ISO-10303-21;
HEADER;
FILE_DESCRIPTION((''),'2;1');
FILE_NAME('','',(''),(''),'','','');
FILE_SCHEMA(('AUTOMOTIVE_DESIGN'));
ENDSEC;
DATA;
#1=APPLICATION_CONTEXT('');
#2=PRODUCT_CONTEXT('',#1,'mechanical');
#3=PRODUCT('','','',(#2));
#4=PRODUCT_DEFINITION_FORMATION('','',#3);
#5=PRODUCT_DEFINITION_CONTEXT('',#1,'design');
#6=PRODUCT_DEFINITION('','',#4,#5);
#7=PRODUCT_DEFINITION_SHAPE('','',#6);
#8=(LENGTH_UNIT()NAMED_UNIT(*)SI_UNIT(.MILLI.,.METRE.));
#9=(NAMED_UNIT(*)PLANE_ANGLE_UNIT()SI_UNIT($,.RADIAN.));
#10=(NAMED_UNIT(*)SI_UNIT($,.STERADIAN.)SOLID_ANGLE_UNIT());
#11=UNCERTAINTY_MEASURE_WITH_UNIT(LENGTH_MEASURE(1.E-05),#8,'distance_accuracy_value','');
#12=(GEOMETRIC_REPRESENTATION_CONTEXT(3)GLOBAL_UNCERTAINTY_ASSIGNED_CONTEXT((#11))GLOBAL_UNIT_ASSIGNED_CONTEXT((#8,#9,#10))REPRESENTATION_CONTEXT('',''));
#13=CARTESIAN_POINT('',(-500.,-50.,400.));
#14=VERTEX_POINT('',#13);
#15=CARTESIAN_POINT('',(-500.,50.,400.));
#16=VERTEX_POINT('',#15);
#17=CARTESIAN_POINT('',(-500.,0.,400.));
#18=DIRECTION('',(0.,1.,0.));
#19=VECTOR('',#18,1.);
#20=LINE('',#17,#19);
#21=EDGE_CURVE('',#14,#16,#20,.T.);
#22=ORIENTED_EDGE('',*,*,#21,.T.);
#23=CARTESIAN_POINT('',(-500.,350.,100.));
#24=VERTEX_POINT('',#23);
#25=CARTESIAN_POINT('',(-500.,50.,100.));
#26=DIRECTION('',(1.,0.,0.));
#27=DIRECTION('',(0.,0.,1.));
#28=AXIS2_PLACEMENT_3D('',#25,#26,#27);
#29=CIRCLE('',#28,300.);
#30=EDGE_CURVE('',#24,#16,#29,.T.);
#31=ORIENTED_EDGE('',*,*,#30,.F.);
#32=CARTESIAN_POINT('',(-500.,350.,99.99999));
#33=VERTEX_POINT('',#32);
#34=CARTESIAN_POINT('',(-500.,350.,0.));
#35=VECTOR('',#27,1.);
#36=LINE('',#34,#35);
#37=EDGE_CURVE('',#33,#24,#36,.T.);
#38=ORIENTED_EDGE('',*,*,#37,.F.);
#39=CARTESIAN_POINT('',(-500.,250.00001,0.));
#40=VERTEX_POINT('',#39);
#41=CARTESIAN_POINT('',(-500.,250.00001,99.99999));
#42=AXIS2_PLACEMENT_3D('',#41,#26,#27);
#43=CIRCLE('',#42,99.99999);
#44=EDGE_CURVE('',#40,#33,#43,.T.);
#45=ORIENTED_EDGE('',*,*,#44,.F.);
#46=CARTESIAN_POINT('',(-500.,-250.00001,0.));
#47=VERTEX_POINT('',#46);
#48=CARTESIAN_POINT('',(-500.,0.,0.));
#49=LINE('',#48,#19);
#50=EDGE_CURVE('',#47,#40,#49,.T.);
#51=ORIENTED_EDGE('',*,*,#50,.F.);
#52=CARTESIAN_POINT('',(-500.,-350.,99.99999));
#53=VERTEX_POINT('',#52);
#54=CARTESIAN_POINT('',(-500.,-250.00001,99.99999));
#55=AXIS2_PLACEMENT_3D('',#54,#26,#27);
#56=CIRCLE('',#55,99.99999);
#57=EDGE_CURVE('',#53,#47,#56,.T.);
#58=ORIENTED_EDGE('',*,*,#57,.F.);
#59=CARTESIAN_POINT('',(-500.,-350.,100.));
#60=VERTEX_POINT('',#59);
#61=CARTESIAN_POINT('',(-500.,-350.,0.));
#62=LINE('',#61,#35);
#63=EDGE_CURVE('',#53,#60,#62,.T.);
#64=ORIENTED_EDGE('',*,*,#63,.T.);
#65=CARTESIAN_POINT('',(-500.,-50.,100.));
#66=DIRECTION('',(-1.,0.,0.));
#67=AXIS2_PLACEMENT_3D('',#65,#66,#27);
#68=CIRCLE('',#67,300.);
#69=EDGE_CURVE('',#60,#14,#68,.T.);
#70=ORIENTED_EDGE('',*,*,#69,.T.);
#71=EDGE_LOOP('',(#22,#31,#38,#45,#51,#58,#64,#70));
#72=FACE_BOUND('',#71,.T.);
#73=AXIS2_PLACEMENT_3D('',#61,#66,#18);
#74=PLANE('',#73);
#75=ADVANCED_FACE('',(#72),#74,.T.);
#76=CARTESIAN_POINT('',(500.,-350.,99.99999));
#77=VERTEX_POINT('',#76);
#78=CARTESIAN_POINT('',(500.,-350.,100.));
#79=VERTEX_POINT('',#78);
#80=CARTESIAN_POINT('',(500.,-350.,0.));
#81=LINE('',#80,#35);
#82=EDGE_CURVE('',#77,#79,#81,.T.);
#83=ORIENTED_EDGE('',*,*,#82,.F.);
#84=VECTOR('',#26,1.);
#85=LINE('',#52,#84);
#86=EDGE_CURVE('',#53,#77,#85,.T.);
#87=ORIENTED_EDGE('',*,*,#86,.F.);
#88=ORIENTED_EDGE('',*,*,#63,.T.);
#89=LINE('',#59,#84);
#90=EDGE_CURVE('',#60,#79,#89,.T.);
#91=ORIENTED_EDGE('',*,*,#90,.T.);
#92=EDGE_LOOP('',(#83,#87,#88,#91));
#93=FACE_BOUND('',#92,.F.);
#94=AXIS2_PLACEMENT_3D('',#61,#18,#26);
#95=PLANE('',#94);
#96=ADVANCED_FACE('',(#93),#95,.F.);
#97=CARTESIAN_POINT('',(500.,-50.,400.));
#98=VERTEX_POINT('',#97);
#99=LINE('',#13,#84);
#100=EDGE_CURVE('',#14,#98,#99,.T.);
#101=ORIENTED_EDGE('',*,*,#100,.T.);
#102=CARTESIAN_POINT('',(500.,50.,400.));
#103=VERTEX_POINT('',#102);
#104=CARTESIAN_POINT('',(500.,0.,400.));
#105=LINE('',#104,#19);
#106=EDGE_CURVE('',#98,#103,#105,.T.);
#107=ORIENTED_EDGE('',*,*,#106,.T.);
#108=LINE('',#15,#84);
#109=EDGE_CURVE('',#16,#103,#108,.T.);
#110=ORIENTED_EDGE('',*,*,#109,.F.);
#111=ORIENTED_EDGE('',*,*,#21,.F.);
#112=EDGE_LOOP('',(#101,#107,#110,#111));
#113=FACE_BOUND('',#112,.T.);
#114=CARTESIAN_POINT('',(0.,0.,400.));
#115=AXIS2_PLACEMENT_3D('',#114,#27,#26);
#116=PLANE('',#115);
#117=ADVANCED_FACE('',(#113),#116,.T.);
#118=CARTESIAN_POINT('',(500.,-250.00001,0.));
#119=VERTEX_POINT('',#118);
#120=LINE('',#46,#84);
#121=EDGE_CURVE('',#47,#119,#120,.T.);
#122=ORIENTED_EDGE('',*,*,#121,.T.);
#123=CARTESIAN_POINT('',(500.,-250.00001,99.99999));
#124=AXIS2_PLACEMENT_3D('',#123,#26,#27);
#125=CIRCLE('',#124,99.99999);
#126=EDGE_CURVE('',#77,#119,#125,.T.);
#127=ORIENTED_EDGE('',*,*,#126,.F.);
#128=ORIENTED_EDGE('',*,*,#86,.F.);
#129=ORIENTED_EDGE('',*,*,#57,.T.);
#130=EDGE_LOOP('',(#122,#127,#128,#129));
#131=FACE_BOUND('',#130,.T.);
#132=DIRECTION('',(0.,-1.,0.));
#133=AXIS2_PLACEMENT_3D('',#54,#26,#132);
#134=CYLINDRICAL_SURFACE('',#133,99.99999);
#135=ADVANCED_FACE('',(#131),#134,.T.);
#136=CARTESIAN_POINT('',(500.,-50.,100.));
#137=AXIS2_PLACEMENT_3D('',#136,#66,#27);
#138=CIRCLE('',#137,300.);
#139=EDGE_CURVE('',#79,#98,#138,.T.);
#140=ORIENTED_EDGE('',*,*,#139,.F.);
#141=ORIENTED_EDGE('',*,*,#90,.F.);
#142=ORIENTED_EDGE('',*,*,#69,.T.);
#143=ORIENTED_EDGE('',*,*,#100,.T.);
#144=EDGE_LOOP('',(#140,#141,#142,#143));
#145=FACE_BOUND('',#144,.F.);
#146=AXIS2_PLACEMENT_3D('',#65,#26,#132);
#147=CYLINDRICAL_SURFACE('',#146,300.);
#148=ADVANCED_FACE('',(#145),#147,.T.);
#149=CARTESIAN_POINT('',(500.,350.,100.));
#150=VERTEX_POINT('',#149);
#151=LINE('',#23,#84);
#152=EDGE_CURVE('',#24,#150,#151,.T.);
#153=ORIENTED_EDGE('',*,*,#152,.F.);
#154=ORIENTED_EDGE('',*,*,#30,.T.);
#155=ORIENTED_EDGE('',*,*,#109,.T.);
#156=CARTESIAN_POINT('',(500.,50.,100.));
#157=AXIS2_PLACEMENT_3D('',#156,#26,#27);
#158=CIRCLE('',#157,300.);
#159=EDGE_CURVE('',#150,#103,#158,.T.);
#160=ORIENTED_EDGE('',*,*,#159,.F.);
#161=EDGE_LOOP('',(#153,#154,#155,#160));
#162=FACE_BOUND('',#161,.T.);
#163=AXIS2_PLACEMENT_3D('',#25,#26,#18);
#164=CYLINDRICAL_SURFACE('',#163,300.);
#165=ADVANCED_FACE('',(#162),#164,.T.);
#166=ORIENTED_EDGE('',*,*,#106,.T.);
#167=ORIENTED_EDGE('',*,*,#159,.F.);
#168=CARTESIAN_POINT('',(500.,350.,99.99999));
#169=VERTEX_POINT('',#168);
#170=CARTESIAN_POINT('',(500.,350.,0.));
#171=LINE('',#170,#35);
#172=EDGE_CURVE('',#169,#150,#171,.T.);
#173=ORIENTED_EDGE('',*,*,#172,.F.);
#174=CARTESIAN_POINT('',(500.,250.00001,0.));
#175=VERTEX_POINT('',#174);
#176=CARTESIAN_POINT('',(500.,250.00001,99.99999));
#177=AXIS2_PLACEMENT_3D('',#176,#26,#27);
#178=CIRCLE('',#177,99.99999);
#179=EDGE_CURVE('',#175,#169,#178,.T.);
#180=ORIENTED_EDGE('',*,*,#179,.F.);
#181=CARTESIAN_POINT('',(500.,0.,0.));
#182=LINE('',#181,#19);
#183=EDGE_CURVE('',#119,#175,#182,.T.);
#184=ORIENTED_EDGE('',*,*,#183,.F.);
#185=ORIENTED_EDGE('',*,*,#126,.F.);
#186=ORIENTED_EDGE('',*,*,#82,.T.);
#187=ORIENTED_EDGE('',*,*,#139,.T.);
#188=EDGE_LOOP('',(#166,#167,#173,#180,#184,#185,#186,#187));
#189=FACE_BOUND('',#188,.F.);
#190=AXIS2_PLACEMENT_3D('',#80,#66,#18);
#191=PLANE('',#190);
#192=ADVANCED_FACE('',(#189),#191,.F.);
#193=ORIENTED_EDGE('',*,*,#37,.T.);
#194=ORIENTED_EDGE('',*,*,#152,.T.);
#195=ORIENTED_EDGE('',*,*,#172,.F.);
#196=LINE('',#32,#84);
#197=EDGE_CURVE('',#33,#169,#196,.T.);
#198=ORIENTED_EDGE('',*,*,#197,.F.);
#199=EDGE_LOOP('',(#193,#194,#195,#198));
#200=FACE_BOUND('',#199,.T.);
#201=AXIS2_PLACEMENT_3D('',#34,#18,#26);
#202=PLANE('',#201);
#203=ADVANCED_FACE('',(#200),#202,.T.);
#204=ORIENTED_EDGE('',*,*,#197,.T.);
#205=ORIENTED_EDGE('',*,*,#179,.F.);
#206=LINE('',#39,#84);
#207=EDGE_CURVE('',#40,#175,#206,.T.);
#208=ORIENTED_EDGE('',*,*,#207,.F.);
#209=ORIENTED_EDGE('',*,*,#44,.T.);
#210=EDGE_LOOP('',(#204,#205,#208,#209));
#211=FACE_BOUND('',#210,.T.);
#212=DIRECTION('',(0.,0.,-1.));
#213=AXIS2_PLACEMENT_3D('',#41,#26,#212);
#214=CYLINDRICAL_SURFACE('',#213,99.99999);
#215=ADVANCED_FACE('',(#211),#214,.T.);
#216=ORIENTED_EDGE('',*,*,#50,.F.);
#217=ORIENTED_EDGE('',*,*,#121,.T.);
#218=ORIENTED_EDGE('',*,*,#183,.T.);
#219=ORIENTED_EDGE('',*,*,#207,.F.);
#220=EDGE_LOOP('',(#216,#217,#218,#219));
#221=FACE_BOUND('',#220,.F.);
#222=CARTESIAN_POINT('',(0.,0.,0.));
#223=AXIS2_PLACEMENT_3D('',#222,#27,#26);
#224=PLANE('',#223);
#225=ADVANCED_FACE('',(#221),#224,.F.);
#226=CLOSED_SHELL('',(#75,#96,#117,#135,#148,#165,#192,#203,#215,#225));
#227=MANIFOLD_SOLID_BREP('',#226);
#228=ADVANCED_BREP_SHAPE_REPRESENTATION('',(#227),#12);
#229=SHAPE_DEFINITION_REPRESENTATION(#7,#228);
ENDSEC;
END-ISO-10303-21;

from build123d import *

# Parameters (mm, degrees)
F0_W     = 1000
F0_H     = 700
F1_DEPTH = 400
F2_R     = 300
F3_R     = 99.99999


# Not quite as in the source:
# - a fillet or chamfer is up to 0.001 mm smaller than in the source, because OpenCascade refuses the exact size


with BuildPart() as f1:
    # F0 (on Top) → F1 (new body)
    with BuildSketch(Plane.XY):
        Rectangle(F0_W, F0_H)
    extrude(amount=F1_DEPTH)

    # F2
    f2_edges = [f1.edges().sort_by_distance(p)[0] for p in [
        (0, -350, 400),
        (0, 350, 400),
    ]]
    fillet(f2_edges, radius=F2_R)

    # F3 (radius 100 in the source; OpenCascade refuses exactly that, so slightly less here)
    f3_edges = [f1.edges().sort_by_distance(p)[0] for p in [
        (0, 350, 0),
        (0, -350, 0),
    ]]
    fillet(f3_edges, radius=F3_R)


solid = f1.part
